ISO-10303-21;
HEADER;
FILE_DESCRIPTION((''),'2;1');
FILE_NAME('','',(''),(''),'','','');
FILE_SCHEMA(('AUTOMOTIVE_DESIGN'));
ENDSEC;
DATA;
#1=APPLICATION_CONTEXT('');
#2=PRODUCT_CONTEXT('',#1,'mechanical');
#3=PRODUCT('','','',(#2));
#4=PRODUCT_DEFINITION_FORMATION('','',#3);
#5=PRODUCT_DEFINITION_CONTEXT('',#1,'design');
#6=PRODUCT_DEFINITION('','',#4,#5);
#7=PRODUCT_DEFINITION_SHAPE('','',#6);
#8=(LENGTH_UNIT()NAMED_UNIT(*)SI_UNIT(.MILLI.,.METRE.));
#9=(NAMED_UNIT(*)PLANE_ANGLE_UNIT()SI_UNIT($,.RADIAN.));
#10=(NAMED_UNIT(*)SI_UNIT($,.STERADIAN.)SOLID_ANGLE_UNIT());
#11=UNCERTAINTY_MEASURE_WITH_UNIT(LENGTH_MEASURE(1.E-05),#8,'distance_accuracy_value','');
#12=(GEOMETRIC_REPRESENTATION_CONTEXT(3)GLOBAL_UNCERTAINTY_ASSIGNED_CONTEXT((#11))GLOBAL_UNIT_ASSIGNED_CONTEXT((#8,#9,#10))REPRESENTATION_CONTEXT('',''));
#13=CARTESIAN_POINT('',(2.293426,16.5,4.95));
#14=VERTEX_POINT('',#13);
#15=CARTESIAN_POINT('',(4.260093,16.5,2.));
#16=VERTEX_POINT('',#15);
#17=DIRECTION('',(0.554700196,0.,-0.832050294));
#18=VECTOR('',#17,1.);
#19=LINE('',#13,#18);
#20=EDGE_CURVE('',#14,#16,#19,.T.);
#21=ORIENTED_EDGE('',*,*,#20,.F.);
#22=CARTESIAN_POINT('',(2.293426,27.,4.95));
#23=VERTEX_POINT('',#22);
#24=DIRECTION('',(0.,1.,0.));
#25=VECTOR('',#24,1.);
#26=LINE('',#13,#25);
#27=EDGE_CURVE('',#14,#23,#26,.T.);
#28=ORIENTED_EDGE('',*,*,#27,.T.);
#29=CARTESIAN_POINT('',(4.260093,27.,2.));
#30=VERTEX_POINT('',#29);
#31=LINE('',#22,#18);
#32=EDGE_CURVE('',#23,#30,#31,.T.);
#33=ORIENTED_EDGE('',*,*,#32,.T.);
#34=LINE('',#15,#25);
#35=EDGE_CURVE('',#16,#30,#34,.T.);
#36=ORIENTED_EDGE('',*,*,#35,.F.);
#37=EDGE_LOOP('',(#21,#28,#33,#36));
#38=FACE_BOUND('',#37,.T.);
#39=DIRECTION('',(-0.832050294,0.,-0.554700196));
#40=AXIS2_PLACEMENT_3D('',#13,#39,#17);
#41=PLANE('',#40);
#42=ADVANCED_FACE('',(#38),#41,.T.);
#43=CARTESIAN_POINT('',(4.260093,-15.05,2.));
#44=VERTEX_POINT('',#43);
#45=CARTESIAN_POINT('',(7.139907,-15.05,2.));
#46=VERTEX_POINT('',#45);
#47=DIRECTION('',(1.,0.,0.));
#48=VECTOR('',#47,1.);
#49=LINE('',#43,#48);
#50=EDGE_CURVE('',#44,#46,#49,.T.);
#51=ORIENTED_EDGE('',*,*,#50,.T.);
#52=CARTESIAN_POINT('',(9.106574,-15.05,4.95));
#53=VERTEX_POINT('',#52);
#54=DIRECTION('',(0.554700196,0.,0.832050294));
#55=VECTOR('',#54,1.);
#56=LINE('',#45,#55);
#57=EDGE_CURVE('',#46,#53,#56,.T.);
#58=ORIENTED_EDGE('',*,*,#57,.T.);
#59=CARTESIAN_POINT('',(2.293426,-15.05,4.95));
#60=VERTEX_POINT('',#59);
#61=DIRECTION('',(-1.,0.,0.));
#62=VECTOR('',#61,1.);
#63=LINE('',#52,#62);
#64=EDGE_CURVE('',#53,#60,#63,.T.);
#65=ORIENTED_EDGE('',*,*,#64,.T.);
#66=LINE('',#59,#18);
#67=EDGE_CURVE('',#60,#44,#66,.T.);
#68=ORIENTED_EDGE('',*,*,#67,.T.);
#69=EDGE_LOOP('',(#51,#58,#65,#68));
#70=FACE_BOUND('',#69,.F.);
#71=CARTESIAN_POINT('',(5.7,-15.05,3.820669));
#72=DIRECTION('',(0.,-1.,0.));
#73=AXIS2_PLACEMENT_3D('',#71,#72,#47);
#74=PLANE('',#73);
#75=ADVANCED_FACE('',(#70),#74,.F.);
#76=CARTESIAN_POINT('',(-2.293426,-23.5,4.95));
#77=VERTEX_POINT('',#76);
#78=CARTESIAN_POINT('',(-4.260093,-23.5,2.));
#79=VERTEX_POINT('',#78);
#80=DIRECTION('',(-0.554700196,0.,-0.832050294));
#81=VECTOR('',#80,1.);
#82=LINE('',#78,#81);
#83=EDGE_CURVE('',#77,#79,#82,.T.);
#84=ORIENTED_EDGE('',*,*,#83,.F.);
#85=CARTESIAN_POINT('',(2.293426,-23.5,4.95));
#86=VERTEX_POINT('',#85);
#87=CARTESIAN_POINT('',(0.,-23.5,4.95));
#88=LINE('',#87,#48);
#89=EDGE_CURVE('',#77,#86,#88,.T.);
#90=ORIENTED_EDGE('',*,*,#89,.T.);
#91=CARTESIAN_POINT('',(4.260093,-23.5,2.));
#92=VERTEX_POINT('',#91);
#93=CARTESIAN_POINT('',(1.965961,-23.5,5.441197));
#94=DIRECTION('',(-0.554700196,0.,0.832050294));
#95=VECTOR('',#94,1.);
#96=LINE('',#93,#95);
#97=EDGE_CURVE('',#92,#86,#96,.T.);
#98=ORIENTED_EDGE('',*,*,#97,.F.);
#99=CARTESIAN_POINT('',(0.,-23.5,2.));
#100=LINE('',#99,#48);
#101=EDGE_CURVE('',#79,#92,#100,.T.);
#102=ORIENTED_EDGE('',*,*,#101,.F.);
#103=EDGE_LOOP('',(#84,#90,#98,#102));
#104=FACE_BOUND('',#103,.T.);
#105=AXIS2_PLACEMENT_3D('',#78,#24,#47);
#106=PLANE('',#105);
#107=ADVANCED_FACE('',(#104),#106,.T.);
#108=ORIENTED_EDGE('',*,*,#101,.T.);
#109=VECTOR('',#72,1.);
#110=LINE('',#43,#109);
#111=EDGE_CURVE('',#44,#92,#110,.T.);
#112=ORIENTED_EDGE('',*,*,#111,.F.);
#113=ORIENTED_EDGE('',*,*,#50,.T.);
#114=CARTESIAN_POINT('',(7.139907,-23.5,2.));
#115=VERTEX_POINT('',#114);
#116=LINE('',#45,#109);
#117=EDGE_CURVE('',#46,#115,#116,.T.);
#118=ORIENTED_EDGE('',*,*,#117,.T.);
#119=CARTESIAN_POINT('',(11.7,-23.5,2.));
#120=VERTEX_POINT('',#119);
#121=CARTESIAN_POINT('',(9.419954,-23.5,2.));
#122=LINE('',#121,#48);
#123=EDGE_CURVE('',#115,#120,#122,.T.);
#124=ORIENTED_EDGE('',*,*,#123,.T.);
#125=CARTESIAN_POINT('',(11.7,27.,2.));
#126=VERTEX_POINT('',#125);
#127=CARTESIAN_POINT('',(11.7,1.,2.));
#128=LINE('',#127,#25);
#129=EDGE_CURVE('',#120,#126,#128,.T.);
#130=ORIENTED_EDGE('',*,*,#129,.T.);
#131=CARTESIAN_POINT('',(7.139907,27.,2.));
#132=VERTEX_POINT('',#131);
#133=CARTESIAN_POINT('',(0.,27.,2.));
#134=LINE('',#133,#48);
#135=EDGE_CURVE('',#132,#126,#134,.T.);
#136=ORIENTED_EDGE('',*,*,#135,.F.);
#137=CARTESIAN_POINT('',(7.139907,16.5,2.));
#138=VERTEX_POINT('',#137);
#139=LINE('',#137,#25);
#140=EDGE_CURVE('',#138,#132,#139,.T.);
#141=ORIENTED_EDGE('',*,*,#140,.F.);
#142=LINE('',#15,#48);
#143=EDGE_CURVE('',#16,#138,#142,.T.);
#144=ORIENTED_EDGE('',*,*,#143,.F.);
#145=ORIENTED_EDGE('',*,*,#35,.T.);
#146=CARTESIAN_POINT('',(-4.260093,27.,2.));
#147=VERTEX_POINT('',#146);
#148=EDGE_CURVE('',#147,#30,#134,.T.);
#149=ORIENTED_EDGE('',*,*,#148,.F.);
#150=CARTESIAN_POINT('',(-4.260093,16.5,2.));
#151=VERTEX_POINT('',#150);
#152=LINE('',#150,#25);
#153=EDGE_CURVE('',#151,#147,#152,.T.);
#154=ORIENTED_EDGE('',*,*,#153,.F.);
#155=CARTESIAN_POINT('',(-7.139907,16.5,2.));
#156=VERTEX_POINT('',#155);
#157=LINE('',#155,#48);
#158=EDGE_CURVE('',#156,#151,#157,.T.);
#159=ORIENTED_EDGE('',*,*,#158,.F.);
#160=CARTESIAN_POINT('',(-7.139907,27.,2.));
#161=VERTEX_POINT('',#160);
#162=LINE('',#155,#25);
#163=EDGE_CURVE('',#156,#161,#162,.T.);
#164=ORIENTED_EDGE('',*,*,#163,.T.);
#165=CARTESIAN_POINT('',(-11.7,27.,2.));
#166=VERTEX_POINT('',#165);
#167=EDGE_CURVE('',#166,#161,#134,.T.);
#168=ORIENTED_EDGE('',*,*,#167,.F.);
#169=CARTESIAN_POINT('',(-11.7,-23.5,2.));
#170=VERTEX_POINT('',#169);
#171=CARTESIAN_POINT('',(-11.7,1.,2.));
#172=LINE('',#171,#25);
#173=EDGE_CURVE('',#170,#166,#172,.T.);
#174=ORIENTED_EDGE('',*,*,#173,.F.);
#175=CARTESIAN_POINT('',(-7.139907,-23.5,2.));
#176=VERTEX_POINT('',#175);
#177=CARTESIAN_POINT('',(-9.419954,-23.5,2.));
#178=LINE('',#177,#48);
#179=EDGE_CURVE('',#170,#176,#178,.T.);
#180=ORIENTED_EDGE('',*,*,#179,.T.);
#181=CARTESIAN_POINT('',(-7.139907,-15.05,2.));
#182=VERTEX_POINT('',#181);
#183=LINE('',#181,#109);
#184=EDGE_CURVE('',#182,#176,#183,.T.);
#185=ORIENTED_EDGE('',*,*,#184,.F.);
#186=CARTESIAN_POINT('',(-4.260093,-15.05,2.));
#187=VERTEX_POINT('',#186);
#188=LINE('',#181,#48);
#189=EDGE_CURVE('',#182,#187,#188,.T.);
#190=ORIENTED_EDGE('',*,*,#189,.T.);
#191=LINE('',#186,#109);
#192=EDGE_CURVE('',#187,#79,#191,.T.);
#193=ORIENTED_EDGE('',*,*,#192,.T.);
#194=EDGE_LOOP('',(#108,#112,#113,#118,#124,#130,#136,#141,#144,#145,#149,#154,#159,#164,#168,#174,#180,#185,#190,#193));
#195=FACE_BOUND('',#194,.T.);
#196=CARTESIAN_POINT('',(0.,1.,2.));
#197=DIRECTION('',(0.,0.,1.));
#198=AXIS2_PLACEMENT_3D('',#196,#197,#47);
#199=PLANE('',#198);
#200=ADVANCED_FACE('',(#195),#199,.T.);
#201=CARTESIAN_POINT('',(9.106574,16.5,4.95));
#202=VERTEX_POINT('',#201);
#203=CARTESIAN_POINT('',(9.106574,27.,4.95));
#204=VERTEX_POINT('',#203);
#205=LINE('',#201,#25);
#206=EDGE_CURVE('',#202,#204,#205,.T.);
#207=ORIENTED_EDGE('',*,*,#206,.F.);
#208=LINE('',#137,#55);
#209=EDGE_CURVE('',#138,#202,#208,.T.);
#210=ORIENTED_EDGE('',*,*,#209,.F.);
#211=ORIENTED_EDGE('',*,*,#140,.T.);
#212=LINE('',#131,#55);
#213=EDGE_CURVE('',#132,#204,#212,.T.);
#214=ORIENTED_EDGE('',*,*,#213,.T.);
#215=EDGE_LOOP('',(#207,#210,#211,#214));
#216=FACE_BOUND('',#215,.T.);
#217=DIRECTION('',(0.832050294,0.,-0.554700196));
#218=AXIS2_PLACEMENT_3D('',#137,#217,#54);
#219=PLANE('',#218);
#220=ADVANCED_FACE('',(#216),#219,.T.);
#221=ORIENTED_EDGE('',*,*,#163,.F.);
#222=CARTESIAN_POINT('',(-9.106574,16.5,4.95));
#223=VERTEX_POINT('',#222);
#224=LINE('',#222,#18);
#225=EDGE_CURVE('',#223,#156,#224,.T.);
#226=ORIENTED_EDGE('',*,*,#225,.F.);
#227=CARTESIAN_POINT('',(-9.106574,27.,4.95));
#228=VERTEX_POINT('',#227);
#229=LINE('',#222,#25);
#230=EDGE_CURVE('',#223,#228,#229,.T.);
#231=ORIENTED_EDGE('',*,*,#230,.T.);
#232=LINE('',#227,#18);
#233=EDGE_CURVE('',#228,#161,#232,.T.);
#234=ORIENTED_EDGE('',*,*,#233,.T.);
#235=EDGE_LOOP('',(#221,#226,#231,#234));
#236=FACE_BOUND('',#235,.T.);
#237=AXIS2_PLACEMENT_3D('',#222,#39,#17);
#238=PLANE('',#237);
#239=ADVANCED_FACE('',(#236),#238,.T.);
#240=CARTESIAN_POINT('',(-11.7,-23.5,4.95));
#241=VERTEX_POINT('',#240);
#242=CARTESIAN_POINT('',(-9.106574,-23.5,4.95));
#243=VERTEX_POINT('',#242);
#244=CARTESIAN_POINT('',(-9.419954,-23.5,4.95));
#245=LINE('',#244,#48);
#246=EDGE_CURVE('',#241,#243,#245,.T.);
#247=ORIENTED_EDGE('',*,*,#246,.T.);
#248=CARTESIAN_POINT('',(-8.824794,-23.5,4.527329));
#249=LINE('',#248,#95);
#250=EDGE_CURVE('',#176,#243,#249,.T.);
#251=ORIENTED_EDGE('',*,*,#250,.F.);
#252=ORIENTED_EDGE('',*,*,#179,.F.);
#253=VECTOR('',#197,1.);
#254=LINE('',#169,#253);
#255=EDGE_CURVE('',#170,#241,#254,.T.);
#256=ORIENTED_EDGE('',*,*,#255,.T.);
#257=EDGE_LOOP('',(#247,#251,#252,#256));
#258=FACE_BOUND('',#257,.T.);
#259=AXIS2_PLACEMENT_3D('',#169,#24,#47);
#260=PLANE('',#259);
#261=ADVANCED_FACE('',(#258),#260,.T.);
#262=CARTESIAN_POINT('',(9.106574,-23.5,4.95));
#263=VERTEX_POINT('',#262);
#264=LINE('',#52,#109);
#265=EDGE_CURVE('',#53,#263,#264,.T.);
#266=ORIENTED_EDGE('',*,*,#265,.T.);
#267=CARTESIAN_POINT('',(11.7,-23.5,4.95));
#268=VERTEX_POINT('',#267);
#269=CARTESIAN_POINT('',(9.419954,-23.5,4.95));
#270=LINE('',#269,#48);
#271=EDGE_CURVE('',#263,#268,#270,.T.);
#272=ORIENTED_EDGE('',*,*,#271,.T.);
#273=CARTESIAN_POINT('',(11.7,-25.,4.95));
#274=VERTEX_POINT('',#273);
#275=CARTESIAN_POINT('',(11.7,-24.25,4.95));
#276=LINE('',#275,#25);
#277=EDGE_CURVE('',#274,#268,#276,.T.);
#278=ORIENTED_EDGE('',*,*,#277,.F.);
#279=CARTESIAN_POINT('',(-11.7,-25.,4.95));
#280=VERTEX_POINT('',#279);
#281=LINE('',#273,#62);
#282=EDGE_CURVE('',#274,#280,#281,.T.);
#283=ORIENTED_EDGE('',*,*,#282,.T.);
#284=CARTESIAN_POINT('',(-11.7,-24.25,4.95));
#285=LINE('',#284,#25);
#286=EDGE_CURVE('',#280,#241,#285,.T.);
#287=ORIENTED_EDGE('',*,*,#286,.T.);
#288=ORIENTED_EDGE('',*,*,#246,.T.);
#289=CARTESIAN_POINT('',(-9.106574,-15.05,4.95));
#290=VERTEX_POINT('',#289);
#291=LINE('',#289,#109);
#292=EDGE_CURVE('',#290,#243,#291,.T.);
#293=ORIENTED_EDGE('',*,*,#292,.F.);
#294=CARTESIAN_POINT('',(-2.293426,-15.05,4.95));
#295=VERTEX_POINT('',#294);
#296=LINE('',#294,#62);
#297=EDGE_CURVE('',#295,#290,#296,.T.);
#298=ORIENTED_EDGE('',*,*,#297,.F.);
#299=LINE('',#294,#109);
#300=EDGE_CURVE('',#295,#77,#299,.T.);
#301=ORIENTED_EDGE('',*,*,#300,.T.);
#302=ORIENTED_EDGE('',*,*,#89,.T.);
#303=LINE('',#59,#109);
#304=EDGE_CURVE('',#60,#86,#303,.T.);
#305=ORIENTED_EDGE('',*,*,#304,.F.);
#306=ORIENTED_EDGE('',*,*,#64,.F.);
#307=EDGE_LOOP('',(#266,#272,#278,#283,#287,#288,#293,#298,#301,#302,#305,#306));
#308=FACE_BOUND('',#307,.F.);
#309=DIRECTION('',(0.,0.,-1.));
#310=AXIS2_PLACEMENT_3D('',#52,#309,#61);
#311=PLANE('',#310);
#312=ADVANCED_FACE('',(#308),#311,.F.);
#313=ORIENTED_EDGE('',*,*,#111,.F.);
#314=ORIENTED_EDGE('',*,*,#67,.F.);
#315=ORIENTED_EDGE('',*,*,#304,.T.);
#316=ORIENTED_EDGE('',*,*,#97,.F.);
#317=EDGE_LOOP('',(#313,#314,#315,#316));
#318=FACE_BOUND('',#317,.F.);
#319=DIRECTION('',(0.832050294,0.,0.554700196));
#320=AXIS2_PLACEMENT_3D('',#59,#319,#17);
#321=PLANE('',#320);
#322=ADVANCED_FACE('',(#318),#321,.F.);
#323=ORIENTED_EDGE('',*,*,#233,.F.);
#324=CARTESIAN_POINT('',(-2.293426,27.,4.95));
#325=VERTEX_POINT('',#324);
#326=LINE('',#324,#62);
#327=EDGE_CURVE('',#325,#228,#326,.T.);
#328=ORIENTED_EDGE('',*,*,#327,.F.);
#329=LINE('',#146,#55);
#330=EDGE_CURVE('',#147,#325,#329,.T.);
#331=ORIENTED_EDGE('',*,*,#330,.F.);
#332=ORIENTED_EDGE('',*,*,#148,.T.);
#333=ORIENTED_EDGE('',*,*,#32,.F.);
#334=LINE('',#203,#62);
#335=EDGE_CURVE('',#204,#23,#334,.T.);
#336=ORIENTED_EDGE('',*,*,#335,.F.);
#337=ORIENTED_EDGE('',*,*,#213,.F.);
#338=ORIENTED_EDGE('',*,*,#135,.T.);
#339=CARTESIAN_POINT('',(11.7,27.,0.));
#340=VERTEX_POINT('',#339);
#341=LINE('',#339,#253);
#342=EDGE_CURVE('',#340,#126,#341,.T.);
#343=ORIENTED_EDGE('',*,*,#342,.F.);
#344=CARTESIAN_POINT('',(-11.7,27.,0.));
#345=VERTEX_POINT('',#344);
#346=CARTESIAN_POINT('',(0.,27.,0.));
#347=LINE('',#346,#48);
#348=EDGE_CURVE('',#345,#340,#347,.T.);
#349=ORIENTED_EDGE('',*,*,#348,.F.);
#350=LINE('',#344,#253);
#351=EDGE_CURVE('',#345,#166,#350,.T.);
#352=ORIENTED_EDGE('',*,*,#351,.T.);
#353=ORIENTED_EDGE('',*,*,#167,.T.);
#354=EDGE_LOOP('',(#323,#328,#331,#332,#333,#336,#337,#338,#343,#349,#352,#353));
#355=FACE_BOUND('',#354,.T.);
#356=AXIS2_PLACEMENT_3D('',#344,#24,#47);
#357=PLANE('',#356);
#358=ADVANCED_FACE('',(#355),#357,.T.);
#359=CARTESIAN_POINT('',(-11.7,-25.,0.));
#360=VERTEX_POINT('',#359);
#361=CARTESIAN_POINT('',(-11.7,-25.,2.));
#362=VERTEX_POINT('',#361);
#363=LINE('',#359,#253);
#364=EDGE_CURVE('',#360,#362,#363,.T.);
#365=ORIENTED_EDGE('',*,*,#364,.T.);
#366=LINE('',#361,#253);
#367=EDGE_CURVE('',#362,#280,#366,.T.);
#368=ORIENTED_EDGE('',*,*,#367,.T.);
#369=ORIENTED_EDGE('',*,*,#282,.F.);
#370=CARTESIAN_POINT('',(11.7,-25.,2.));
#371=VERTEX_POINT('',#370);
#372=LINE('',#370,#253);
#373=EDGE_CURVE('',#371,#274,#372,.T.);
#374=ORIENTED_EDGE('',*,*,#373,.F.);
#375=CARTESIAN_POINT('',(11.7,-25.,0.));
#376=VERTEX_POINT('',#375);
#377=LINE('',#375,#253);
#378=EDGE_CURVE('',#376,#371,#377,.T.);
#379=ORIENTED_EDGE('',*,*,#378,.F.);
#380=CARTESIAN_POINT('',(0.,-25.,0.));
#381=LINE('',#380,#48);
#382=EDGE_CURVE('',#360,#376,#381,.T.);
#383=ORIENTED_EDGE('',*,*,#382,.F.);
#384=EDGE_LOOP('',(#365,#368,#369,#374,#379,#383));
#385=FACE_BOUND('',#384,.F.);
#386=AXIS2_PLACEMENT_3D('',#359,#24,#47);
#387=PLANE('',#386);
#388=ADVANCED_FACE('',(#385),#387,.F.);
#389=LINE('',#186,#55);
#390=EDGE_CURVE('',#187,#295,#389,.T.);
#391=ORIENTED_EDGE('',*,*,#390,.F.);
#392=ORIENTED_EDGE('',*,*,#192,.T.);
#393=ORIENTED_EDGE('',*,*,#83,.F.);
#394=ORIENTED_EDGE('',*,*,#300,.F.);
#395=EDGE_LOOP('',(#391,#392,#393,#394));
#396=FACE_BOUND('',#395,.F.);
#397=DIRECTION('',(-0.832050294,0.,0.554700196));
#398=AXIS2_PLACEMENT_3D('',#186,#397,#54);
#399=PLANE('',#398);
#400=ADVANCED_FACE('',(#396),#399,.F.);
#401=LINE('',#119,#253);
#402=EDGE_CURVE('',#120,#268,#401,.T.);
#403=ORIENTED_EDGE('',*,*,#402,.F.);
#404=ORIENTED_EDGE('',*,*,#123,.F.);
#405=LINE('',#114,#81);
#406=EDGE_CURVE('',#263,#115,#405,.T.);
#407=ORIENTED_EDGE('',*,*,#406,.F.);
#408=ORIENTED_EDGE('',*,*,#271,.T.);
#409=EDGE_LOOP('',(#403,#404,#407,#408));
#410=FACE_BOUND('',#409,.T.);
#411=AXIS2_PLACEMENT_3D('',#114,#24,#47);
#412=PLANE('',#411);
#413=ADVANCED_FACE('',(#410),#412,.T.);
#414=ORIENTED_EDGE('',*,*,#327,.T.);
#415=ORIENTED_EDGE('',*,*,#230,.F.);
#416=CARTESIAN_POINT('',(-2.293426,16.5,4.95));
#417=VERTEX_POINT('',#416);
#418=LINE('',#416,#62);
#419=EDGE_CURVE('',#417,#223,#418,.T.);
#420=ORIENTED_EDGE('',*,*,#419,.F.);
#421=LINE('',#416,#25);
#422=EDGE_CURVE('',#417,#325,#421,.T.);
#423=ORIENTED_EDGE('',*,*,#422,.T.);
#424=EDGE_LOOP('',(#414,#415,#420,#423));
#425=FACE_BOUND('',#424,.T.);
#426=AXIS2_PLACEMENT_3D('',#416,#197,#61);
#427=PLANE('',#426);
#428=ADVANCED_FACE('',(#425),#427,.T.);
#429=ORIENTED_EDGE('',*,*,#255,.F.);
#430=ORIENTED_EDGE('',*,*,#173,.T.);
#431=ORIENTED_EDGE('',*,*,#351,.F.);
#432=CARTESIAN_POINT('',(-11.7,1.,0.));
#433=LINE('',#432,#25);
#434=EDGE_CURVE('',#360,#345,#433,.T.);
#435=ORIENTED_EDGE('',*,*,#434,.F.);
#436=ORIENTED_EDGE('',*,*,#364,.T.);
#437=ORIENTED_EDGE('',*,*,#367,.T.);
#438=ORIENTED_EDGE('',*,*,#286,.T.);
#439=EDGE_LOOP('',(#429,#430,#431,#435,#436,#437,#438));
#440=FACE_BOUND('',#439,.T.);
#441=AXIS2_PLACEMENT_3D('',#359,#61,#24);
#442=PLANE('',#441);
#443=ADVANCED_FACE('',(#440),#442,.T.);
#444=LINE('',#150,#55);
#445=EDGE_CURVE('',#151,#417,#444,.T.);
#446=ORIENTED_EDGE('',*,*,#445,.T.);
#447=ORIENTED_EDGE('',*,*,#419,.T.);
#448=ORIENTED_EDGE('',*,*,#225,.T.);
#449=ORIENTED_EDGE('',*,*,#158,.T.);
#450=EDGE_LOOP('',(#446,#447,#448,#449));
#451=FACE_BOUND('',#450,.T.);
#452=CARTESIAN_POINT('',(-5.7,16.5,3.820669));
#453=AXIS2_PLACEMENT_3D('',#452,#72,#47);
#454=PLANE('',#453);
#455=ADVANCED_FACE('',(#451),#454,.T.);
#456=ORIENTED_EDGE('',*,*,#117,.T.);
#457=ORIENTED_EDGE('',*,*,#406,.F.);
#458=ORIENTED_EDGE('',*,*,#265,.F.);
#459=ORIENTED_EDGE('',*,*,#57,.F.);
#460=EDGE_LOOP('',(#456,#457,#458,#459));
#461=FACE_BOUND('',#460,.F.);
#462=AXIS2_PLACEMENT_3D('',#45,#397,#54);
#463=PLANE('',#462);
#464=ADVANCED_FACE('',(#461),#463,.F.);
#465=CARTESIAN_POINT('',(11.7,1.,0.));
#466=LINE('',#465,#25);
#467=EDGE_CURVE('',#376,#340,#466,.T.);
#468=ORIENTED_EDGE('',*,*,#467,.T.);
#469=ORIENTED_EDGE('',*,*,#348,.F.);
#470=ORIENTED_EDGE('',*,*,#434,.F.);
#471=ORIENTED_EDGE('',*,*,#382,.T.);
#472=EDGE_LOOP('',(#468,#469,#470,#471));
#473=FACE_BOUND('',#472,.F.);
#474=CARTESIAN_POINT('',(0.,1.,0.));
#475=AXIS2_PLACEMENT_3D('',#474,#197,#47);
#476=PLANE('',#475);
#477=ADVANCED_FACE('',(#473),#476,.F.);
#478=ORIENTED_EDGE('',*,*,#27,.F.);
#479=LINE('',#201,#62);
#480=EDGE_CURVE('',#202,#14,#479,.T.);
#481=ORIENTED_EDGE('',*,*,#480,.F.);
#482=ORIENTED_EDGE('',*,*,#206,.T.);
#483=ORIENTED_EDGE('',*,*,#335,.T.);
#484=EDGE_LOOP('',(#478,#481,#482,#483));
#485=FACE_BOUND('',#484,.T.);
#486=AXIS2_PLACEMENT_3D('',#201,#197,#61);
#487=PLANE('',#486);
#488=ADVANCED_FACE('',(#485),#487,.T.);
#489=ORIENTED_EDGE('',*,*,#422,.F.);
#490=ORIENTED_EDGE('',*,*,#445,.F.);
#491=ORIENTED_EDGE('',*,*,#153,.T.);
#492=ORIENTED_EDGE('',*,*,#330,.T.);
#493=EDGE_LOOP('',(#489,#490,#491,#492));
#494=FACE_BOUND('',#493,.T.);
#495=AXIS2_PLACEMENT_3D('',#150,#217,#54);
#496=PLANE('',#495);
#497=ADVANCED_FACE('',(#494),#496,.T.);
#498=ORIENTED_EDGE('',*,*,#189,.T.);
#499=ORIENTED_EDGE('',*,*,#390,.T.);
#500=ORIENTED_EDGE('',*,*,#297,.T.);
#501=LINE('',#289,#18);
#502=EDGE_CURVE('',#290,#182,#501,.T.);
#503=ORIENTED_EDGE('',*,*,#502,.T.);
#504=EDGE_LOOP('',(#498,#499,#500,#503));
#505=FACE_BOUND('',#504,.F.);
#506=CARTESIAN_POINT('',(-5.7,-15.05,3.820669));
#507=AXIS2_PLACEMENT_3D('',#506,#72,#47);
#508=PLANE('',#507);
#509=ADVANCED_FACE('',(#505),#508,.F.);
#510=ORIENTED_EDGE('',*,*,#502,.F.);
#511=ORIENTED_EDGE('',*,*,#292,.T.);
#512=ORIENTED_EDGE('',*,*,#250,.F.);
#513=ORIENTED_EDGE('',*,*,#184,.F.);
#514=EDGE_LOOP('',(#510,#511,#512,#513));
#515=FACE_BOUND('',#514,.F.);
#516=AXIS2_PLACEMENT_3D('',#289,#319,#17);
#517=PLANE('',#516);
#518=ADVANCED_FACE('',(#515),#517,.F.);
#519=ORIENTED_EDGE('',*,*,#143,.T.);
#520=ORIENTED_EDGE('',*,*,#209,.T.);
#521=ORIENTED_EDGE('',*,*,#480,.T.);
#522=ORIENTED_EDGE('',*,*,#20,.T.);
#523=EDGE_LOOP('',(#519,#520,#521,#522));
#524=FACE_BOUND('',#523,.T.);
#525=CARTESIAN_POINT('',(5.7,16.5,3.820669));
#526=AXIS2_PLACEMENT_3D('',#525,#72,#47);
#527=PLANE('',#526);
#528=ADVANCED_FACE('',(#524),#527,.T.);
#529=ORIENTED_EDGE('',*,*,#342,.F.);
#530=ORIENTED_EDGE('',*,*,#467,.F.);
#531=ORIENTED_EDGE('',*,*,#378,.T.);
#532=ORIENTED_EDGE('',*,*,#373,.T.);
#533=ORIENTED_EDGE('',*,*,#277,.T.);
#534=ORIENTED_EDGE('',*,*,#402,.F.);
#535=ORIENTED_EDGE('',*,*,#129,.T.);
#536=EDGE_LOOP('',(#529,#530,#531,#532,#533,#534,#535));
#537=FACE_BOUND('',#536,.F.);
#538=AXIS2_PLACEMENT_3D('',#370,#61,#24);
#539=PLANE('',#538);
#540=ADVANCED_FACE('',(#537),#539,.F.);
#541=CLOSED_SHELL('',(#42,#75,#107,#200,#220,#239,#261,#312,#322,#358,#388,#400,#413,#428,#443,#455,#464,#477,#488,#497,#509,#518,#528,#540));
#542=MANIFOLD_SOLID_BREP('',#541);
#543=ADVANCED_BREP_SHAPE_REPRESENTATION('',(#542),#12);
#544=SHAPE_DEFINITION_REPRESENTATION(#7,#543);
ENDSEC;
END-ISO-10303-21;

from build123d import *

# Parameters (mm, degrees)
F0_W     = 23.4
F0_H     = 52
F1_DEPTH = 2
F3_START = 15.05
F3_DEPTH = 9.95
F4_W     = 4.5600925213
F4_H     = 1.5
F4_W_2   = 8.5201850425
F5_DEPTH = 2.95
F6_START = -16.5
F6_DEPTH = 10.5


with BuildPart() as f1:
    # F0 (on Top) → F1 (new body)
    with BuildSketch(Plane.XY):
        with Locations((0, 1)):
            Rectangle(F0_W, F0_H)
    extrude(amount=F1_DEPTH)

    # F2 (on Front) → F3 (join)
    with BuildSketch(Plane.XZ.offset(F3_START)):
        Polygon((2.2934258546, 4.95), (4.2600925213, 2), (7.1399074787, 2), (9.1065741454, 4.95), align=None)
        Polygon((-4.2600925213, 2), (-2.2934258546, 4.95), (-9.1065741454, 4.95), (-7.1399074787, 2), align=None)
    extrude(amount=F3_DEPTH)

    # F4 (on face) → F5 (join)
    with BuildSketch(Plane.XY.offset(2)):
        with Locations((9.4199537394, -24.25)):
            Rectangle(F4_W, F4_H)
        with Locations((0, -24.25)):
            Rectangle(F4_W_2, F4_H)
        with Locations((-9.4199537394, -24.25)):
            Rectangle(F4_W, F4_H)
    extrude(amount=F5_DEPTH)

    # F2 (on Front) → F6 (join)
    with BuildSketch(Plane.XZ.offset(F6_START)):
        Polygon((2.2934258546, 4.95), (4.2600925213, 2), (7.1399074787, 2), (9.1065741454, 4.95), align=None)
        Polygon((-4.2600925213, 2), (-2.2934258546, 4.95), (-9.1065741454, 4.95), (-7.1399074787, 2), align=None)
    extrude(amount=-F6_DEPTH)


solid = f1.part
